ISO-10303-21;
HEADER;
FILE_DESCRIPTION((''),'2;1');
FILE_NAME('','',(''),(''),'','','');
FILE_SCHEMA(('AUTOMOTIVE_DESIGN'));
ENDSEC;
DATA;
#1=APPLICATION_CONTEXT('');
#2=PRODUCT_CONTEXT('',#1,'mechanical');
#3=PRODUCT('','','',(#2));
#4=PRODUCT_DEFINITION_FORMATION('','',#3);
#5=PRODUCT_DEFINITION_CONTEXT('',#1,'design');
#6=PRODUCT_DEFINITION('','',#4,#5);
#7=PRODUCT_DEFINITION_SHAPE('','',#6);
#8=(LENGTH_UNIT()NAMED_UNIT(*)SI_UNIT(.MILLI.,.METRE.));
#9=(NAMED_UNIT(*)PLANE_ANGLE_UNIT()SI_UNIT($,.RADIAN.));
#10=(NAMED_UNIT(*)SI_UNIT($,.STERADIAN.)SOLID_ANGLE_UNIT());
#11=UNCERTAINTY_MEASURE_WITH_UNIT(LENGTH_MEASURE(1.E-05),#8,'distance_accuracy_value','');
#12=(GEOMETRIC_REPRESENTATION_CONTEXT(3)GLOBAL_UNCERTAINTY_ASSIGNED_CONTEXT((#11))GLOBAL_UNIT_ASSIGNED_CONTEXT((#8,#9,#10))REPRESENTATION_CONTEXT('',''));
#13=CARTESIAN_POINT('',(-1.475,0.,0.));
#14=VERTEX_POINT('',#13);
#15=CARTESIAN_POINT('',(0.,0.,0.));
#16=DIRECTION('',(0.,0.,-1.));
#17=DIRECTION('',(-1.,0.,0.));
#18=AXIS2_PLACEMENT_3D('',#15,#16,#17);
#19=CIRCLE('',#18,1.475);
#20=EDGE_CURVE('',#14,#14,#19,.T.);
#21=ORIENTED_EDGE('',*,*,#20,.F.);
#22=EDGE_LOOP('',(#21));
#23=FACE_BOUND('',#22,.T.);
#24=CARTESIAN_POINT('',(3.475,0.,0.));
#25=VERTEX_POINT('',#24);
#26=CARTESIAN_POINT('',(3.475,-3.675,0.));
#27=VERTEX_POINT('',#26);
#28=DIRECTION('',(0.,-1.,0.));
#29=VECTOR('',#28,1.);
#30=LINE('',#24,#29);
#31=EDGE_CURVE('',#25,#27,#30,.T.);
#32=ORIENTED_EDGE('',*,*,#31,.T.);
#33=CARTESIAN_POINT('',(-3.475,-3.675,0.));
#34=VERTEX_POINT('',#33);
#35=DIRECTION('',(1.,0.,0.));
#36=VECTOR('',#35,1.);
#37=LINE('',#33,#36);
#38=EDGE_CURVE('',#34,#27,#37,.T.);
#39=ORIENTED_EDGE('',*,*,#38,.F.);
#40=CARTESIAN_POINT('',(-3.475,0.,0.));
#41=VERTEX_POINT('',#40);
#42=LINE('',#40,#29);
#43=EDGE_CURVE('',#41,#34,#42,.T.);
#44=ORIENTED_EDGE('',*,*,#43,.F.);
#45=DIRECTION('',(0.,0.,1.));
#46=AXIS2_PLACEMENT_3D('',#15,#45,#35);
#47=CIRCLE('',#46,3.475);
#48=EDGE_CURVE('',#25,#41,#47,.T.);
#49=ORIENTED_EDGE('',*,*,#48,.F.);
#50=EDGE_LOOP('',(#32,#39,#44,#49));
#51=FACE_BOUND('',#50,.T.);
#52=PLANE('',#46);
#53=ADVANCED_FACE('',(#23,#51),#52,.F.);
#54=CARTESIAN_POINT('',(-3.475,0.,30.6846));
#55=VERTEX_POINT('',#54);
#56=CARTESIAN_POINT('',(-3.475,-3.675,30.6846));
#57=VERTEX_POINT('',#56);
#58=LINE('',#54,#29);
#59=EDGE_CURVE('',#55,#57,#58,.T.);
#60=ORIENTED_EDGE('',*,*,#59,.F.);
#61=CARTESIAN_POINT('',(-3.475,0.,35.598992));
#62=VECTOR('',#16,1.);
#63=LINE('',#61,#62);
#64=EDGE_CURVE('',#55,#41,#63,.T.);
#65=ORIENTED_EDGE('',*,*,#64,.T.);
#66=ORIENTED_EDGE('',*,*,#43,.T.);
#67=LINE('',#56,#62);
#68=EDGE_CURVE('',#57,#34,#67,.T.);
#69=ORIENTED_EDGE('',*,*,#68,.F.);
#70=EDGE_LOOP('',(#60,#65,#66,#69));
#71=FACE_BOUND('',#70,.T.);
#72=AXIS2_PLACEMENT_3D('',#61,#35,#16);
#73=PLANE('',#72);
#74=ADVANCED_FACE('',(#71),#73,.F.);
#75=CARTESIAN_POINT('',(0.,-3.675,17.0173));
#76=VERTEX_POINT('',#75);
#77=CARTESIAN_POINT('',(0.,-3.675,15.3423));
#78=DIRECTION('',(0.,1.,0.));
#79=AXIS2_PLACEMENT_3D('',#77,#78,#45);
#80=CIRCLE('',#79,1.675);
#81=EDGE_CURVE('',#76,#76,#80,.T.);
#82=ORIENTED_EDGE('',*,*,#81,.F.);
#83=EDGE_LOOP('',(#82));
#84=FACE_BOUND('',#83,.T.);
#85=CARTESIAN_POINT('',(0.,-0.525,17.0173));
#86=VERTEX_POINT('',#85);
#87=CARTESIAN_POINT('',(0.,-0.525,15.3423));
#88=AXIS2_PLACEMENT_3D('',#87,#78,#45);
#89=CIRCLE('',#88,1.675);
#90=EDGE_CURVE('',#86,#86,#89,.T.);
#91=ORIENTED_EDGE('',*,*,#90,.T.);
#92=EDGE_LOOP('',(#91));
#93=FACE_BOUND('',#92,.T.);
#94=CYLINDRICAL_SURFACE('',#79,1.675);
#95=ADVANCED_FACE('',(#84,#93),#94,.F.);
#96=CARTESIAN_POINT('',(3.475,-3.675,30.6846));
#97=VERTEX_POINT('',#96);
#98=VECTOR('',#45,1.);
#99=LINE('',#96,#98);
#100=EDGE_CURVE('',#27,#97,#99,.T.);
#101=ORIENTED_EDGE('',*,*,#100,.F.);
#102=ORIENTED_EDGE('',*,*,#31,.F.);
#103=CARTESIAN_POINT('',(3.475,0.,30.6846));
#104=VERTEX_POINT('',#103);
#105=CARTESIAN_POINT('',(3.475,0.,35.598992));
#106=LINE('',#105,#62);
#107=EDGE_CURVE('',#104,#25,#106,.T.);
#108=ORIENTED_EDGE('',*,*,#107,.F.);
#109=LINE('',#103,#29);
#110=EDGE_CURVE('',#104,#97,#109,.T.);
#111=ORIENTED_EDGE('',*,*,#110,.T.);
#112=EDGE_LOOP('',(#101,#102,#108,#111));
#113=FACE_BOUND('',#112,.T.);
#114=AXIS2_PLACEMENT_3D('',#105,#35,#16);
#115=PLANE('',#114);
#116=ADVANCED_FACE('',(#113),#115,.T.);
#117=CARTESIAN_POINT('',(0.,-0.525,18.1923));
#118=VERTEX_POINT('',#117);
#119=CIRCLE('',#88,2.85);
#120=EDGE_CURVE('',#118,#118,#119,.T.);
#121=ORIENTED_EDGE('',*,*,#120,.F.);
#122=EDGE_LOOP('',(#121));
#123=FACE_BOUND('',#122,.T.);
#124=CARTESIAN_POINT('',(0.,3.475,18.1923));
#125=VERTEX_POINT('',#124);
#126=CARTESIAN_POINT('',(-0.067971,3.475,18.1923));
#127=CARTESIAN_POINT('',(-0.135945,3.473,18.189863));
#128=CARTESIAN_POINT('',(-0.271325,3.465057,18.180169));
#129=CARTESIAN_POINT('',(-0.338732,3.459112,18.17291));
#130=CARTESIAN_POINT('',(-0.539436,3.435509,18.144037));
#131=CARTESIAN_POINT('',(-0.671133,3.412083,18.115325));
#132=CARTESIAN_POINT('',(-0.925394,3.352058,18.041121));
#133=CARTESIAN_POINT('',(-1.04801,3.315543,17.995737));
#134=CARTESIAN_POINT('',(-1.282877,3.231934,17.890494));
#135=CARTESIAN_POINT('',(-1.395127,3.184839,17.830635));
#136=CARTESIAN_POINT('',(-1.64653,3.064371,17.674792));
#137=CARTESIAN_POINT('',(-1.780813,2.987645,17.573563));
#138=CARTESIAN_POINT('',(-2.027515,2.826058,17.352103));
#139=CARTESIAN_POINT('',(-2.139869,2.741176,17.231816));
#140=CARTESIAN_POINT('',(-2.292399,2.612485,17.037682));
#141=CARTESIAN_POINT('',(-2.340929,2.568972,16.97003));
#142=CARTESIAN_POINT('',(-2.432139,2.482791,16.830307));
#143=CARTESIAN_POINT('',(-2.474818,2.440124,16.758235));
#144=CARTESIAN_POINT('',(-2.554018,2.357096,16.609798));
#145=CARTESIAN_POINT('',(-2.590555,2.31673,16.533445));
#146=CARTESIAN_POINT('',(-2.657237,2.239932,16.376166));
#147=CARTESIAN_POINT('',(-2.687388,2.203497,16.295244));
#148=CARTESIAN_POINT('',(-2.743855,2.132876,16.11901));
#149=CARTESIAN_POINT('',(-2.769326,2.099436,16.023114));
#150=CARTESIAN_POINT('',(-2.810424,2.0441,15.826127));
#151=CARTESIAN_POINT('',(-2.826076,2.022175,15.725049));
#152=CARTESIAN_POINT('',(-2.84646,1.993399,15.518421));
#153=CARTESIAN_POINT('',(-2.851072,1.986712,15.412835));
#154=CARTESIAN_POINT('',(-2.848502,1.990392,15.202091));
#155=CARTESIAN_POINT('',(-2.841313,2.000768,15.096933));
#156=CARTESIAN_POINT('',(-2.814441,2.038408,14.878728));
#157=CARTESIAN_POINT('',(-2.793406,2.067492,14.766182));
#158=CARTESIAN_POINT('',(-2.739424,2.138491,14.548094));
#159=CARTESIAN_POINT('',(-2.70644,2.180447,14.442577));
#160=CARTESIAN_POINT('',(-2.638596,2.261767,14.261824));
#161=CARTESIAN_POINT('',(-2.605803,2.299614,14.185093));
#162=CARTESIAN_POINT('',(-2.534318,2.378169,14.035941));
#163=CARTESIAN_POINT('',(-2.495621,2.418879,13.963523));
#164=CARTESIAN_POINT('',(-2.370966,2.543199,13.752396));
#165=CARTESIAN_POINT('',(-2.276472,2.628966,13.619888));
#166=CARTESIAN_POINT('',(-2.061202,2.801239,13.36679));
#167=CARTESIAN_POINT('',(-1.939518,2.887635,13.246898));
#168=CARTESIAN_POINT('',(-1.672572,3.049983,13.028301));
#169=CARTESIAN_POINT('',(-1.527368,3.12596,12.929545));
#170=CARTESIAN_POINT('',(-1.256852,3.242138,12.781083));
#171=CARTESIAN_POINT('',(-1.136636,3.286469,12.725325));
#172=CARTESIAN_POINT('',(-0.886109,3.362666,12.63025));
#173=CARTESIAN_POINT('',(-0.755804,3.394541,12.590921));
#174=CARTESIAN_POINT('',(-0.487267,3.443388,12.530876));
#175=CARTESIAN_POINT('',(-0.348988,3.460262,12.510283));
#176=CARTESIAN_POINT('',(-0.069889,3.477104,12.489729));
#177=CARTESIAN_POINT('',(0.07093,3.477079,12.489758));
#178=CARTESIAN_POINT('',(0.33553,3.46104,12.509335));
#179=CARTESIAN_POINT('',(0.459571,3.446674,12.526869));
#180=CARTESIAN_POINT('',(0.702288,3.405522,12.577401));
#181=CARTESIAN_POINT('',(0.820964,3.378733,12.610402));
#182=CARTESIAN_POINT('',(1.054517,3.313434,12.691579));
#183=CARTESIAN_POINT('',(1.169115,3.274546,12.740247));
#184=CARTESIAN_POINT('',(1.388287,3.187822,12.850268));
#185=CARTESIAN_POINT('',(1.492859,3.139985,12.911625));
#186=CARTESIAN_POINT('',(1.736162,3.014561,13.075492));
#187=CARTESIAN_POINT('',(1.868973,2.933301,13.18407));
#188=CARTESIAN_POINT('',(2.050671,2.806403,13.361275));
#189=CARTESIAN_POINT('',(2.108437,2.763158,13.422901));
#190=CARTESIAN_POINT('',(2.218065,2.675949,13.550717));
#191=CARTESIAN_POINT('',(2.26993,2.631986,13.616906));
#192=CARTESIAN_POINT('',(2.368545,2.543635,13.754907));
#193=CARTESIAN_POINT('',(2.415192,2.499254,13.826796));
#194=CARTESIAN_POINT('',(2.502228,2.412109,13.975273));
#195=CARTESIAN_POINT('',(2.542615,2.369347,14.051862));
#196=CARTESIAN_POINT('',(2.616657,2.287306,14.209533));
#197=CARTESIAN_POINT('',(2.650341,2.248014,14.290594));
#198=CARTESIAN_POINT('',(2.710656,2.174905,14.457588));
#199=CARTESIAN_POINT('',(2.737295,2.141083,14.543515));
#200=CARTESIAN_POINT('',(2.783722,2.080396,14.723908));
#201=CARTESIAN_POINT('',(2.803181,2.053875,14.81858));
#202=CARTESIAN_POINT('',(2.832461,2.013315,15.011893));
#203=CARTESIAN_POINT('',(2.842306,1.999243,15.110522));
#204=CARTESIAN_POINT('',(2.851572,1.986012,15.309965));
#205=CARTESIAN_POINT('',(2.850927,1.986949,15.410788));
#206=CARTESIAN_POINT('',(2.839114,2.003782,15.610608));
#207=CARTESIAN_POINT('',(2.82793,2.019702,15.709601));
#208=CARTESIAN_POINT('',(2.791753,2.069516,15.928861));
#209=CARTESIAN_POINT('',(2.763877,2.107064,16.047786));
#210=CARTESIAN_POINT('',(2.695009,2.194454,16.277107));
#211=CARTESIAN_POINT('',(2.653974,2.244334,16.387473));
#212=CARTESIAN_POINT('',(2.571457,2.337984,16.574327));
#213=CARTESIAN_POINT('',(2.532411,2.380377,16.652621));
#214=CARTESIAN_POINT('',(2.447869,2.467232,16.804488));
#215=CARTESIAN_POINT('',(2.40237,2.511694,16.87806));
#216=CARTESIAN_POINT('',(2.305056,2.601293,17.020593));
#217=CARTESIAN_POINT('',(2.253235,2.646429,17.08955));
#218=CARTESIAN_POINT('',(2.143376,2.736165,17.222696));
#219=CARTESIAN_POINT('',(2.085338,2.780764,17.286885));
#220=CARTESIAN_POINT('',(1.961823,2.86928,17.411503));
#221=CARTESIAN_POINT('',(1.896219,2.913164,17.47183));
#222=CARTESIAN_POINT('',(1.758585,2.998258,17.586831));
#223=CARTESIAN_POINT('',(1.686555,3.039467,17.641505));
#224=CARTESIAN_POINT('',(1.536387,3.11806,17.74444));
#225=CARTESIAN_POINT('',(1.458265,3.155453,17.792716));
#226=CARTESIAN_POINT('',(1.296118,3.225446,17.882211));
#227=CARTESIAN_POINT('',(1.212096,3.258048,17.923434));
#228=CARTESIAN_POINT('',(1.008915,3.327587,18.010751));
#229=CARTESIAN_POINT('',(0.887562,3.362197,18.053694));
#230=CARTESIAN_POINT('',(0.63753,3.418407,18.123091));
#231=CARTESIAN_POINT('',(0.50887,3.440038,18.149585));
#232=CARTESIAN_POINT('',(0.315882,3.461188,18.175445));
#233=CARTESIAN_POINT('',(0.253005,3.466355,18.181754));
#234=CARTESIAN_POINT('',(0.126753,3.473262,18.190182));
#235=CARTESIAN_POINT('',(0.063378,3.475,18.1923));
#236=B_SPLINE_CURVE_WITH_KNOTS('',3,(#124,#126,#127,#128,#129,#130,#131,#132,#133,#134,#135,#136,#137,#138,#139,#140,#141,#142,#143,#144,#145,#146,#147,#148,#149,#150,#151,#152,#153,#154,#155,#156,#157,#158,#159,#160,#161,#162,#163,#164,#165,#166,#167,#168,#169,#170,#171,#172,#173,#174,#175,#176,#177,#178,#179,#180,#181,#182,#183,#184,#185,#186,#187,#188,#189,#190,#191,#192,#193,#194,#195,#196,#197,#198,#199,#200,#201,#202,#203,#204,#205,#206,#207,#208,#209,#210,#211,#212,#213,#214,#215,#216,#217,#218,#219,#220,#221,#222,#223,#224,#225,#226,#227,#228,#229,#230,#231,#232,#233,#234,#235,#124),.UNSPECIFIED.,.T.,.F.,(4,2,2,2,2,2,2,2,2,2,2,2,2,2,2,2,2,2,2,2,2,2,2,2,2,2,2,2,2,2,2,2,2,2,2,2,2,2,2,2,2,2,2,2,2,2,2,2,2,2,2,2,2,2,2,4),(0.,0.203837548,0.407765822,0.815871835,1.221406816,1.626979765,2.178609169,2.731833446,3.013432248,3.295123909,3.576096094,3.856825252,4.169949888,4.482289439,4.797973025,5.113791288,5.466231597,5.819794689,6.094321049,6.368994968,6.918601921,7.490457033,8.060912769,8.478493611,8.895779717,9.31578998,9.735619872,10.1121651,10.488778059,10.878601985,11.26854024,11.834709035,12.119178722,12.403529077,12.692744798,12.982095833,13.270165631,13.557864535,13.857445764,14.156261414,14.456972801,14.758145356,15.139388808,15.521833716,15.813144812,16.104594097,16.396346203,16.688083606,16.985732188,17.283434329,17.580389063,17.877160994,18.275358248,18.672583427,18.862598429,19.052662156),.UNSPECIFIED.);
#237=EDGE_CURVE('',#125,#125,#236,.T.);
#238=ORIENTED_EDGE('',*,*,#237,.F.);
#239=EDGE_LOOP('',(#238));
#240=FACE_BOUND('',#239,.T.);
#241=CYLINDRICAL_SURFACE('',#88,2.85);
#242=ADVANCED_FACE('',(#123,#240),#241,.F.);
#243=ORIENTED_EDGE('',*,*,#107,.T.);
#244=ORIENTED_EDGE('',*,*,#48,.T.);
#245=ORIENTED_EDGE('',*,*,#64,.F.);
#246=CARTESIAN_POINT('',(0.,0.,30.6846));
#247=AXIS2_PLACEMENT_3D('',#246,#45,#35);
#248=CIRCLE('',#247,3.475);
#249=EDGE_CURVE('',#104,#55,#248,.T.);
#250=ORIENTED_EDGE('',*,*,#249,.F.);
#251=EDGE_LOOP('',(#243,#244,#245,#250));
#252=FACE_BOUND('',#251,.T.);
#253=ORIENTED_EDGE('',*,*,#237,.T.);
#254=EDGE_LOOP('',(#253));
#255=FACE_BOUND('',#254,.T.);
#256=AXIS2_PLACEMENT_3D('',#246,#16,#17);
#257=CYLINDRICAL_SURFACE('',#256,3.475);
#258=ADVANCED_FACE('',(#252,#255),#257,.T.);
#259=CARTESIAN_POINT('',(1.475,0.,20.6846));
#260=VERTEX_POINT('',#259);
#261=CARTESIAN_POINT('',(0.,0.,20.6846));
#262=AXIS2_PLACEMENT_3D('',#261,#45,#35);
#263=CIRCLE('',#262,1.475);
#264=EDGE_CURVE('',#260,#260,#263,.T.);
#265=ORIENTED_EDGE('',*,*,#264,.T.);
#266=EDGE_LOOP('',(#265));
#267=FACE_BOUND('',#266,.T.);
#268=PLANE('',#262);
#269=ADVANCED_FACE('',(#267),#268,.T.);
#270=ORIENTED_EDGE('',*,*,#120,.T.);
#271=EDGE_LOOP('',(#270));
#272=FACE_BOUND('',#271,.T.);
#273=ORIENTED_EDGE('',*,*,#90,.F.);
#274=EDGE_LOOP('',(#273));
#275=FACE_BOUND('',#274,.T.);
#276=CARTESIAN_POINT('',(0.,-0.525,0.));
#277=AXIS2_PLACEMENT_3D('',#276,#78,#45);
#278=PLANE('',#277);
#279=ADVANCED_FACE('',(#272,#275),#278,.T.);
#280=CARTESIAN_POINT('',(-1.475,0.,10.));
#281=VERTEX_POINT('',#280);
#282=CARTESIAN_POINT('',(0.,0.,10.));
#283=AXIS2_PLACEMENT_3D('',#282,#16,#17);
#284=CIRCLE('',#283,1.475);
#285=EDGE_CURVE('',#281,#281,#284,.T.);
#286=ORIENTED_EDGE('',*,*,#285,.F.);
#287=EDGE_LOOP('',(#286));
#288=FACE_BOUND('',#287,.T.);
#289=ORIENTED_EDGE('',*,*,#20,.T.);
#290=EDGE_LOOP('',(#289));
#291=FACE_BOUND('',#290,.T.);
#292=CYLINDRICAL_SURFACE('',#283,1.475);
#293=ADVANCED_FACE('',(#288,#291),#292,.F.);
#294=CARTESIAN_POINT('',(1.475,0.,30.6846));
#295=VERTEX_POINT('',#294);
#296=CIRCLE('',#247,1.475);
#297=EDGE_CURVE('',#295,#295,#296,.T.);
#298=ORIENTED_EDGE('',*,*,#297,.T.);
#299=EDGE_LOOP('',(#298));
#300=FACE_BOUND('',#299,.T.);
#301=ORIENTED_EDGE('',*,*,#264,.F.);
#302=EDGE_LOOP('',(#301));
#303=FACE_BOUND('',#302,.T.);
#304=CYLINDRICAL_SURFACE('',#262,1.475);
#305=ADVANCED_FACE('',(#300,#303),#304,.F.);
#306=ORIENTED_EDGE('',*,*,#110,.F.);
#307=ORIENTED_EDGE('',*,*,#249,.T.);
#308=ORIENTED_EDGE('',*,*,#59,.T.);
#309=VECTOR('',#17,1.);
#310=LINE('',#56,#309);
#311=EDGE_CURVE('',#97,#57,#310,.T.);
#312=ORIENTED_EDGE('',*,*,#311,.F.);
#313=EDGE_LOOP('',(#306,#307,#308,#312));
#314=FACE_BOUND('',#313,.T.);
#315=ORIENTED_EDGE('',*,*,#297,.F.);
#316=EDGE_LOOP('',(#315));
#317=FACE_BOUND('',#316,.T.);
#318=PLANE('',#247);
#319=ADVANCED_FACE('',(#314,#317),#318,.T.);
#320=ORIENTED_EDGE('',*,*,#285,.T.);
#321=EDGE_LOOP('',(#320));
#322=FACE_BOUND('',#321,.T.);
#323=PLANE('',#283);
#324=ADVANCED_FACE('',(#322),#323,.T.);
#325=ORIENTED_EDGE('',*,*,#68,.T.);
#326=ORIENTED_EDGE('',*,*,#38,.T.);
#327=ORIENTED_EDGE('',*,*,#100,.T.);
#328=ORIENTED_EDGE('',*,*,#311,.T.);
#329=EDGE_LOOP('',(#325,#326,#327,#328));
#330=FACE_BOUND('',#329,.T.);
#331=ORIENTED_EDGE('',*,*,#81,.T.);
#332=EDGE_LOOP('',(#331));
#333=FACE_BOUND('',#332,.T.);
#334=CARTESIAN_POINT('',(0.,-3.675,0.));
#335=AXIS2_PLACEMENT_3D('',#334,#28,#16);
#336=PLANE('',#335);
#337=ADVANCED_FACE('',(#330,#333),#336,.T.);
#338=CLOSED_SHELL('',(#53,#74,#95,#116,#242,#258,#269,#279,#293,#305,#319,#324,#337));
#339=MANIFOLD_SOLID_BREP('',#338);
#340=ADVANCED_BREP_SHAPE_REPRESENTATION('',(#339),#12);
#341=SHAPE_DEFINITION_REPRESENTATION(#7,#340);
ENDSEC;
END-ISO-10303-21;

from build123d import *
from build123d.topology import SkipClean

# Parameters (mm, degrees)
SKETCH2_R           = 3.475
BOSS_EXTRUDE2_DEPTH = 30.6846
SKETCH3_R           = 1.475
CUT_EXTRUDE1_DEPTH  = 10
CUT_EXTRUDE2_START  = -10
SKETCH4_R           = 1.475
CUT_EXTRUDE2_DEPTH  = 10
BOSS_EXTRUDE3_DEPTH = 30.6846
SKETCH6_W           = 6.95
SKETCH6_H           = 30.6846
BOSS_EXTRUDE4_DEPTH = 0.2
SKETCH8_W           = 3
SKETCH8_H           = 2
CUT_EXTRUDE3_DEPTH  = 32.675744698
SKETCH10_R          = 2.85
CUT_EXTRUDE4_DEPTH  = 3
SKETCH11_R          = 1.675
CUT_EXTRUDE5_DEPTH  = 32.138726849
BOSS_EXTRUDE5_REACH = 33.487
SKETCH12_R          = 4.85
SKETCH12_R_2        = 2.85
BOSS_EXTRUDE7_START = 1
SKETCH13_R          = 2.85
BOSS_EXTRUDE7_DEPTH = 1
CUT_EXTRUDE6_DEPTH  = 32.282148424
CUT_EXTRUDE7_DEPTH  = 32.877730235


with BuildPart() as part:
    # Sketch2 → Boss-Extrude2 (new body)
    with BuildSketch(Plane.XY):
        Circle(SKETCH2_R)
    extrude(amount=BOSS_EXTRUDE2_DEPTH)

    # Sketch3 → Cut-Extrude1 (cut)
    with BuildSketch(Plane.XY.offset(30.6846)):
        Circle(SKETCH3_R)
    extrude(amount=-CUT_EXTRUDE1_DEPTH, mode=Mode.SUBTRACT)

    # Sketch4 → Cut-Extrude2 (cut)
    with BuildSketch(Plane(origin=(0, 0, 0), x_dir=(-1, 0, 0), z_dir=(0, 0, -1)).offset(CUT_EXTRUDE2_START)):
        with Locations(Location((0, 0, 0), (0, 0, 180))):
            Circle(SKETCH4_R)
    extrude(amount=CUT_EXTRUDE2_DEPTH, mode=Mode.SUBTRACT)

    # Sketch5 → Boss-Extrude3 (add)
    with BuildSketch(Plane(origin=(0, 0, 0), x_dir=(-1, 0, 0), z_dir=(0, 0, -1))):
        with BuildLine():
            ThreePointArc((0, -3.475), (-2.457196065, -2.457196065), (-3.475, 0))
            Line((-3.475, 0), (-3.475, -3.475))
            Line((-3.475, -3.475), (0, -3.475))
        make_face()
        with BuildLine():
            Line((3.475, -3.475), (3.475, 0))
            ThreePointArc((3.475, 0), (2.457196065, -2.457196065), (0, -3.475))
            Line((0, -3.475), (3.475, -3.475))
        make_face()
    extrude(amount=-BOSS_EXTRUDE3_DEPTH)

    # Sketch6 → Boss-Extrude4 (add)
    with BuildSketch(Plane.XZ.offset(3.475)):
        with Locations((0, 15.3423)):
            Rectangle(SKETCH6_W, SKETCH6_H)
    extrude(amount=BOSS_EXTRUDE4_DEPTH)

    # Sketch8 → Cut-Extrude3 (cut, through all)
    with BuildSketch(Plane.ZY.offset(3.475)):
        with Locations((16.8423, 3.475)):
            Rectangle(SKETCH8_W, SKETCH8_H)
        with Locations((13.8423, 3.475)):
            Rectangle(SKETCH8_W, SKETCH8_H)
    extrude(amount=-CUT_EXTRUDE3_DEPTH, mode=Mode.SUBTRACT)

    # Sketch10 → Cut-Extrude4 (cut)
    with BuildSketch(Plane(origin=(0, 2.475, 0), x_dir=(1, 0, 0), z_dir=(0, 1, 0))):
        with Locations(Location((0, -15.3423, 0), (0, 0, 270))):
            Circle(SKETCH10_R)
    extrude(amount=-CUT_EXTRUDE4_DEPTH, mode=Mode.SUBTRACT)

    # Sketch11 → Cut-Extrude5 (cut, through all)
    with BuildSketch(Plane(origin=(0, -0.525, 0), x_dir=(1, 0, 0), z_dir=(0, 1, 0))):
        with Locations(Location((0, -15.3423, 0), (0, 0, 270))):
            Circle(SKETCH11_R)
    extrude(amount=-CUT_EXTRUDE5_DEPTH, mode=Mode.SUBTRACT)

    # Boss-Extrude5: up to this face of the body (flat: up to its plane)
    boss_extrude5_end = Plane(part.part.faces().sort_by_distance((0, -3.675, 30.369981632))[0])
    # Sketch12 → Boss-Extrude5 (add, up to the picked face)
    with BuildSketch(Plane(origin=(0, 2.475, 0), x_dir=(1, 0, 0), z_dir=(0, 1, 0)), mode=Mode.PRIVATE) as boss_extrude5_sk1:
        with Locations((0, -15.3423)):
            Circle(SKETCH12_R)
        with Locations(Location((0, -15.3423, 0), (0, 0, 270))):
            Circle(SKETCH12_R_2, mode=Mode.SUBTRACT)
    boss_extrude5_tool1 = split(extrude(boss_extrude5_sk1.sketch, amount=-BOSS_EXTRUDE5_REACH, mode=Mode.PRIVATE), bisect_by=boss_extrude5_end, keep=Keep.BOTH, mode=Mode.PRIVATE)
    add(boss_extrude5_tool1.solids().sort_by(Axis((-4.712821, 2.475, 15.3423), (0, -1, 0)))[0])

    # Sketch13 → Boss-Extrude7 (add)
    with BuildSketch(Plane(origin=(0, 2.475, 0), x_dir=(1, 0, 0), z_dir=(0, 1, 0)).offset(BOSS_EXTRUDE7_START)):
        with BuildLine():
            Line((-2.439262184, -19.534256584), (-2.439262184, -18.3423))
            Line((-2.439262184, -18.3423), (2.439262184, -18.3423))
            Line((2.439262184, -18.3423), (2.439262184, -19.534256584))
            ThreePointArc((2.439262184, -19.534256584), (4.85, -15.3423), (2.439262184, -11.150343416))
            Line((2.439262184, -11.150343416), (2.439262184, -12.3423))
            Line((2.439262184, -12.3423), (-2.439262184, -12.3423))
            Line((-2.439262184, -12.3423), (-2.439262184, -11.150343416))
            ThreePointArc((-2.439262184, -11.150343416), (-4.85, -15.3423), (-2.439262184, -19.534256584))
        make_face()
        with Locations(Location((0, -15.3423, 0), (0, 0, 270))):
            Circle(SKETCH13_R, mode=Mode.SUBTRACT)
    extrude(amount=-BOSS_EXTRUDE7_DEPTH)

    # Sketch15 → Cut-Extrude6 (cut, through all)
    with SkipClean():  # the faces are left unmerged after this step: merging them gives an invalid solid
        with BuildSketch(Plane(origin=(0, 0, 0), x_dir=(-1, 0, 0), z_dir=(0, 0, -1))):
            with BuildLine():
                Line((6.975728947, 0), (3.475, 0))
                ThreePointArc((3.475, 0), (0, 3.475), (-3.475, 0))
                Line((-3.475, 0), (-8.171324348, 0))
                Line((-8.171324348, 0), (-8.171324348, 6.073396115))
                Line((-8.171324348, 6.073396115), (6.975728947, 6.073396115))
                Line((6.975728947, 6.073396115), (6.975728947, 0))
            make_face()
        extrude(amount=-CUT_EXTRUDE6_DEPTH, mode=Mode.SUBTRACT)
    add(part.part.scale(1), mode=Mode.REPLACE)  # the faces are merged on a copy

    # Sketch16 → Cut-Extrude7 (cut, through all)
    with BuildSketch(Plane(origin=(0, -3.675, 0), x_dir=(-1, 0, 0), z_dir=(0, -1, 0))):
        Polygon((-3.475, -18.725623071), (-3.475, -11.958976929), (-9.441171238, -13.498522389), (-7.451050634, -19.072360919), align=None)
        Polygon((3.475, -18.725623071), (3.475, -11.958976929), (8.590567713, -11.958976929), (7.591441213, -18.725623071), align=None)
    extrude(amount=-CUT_EXTRUDE7_DEPTH, mode=Mode.SUBTRACT)


solid = part.part
